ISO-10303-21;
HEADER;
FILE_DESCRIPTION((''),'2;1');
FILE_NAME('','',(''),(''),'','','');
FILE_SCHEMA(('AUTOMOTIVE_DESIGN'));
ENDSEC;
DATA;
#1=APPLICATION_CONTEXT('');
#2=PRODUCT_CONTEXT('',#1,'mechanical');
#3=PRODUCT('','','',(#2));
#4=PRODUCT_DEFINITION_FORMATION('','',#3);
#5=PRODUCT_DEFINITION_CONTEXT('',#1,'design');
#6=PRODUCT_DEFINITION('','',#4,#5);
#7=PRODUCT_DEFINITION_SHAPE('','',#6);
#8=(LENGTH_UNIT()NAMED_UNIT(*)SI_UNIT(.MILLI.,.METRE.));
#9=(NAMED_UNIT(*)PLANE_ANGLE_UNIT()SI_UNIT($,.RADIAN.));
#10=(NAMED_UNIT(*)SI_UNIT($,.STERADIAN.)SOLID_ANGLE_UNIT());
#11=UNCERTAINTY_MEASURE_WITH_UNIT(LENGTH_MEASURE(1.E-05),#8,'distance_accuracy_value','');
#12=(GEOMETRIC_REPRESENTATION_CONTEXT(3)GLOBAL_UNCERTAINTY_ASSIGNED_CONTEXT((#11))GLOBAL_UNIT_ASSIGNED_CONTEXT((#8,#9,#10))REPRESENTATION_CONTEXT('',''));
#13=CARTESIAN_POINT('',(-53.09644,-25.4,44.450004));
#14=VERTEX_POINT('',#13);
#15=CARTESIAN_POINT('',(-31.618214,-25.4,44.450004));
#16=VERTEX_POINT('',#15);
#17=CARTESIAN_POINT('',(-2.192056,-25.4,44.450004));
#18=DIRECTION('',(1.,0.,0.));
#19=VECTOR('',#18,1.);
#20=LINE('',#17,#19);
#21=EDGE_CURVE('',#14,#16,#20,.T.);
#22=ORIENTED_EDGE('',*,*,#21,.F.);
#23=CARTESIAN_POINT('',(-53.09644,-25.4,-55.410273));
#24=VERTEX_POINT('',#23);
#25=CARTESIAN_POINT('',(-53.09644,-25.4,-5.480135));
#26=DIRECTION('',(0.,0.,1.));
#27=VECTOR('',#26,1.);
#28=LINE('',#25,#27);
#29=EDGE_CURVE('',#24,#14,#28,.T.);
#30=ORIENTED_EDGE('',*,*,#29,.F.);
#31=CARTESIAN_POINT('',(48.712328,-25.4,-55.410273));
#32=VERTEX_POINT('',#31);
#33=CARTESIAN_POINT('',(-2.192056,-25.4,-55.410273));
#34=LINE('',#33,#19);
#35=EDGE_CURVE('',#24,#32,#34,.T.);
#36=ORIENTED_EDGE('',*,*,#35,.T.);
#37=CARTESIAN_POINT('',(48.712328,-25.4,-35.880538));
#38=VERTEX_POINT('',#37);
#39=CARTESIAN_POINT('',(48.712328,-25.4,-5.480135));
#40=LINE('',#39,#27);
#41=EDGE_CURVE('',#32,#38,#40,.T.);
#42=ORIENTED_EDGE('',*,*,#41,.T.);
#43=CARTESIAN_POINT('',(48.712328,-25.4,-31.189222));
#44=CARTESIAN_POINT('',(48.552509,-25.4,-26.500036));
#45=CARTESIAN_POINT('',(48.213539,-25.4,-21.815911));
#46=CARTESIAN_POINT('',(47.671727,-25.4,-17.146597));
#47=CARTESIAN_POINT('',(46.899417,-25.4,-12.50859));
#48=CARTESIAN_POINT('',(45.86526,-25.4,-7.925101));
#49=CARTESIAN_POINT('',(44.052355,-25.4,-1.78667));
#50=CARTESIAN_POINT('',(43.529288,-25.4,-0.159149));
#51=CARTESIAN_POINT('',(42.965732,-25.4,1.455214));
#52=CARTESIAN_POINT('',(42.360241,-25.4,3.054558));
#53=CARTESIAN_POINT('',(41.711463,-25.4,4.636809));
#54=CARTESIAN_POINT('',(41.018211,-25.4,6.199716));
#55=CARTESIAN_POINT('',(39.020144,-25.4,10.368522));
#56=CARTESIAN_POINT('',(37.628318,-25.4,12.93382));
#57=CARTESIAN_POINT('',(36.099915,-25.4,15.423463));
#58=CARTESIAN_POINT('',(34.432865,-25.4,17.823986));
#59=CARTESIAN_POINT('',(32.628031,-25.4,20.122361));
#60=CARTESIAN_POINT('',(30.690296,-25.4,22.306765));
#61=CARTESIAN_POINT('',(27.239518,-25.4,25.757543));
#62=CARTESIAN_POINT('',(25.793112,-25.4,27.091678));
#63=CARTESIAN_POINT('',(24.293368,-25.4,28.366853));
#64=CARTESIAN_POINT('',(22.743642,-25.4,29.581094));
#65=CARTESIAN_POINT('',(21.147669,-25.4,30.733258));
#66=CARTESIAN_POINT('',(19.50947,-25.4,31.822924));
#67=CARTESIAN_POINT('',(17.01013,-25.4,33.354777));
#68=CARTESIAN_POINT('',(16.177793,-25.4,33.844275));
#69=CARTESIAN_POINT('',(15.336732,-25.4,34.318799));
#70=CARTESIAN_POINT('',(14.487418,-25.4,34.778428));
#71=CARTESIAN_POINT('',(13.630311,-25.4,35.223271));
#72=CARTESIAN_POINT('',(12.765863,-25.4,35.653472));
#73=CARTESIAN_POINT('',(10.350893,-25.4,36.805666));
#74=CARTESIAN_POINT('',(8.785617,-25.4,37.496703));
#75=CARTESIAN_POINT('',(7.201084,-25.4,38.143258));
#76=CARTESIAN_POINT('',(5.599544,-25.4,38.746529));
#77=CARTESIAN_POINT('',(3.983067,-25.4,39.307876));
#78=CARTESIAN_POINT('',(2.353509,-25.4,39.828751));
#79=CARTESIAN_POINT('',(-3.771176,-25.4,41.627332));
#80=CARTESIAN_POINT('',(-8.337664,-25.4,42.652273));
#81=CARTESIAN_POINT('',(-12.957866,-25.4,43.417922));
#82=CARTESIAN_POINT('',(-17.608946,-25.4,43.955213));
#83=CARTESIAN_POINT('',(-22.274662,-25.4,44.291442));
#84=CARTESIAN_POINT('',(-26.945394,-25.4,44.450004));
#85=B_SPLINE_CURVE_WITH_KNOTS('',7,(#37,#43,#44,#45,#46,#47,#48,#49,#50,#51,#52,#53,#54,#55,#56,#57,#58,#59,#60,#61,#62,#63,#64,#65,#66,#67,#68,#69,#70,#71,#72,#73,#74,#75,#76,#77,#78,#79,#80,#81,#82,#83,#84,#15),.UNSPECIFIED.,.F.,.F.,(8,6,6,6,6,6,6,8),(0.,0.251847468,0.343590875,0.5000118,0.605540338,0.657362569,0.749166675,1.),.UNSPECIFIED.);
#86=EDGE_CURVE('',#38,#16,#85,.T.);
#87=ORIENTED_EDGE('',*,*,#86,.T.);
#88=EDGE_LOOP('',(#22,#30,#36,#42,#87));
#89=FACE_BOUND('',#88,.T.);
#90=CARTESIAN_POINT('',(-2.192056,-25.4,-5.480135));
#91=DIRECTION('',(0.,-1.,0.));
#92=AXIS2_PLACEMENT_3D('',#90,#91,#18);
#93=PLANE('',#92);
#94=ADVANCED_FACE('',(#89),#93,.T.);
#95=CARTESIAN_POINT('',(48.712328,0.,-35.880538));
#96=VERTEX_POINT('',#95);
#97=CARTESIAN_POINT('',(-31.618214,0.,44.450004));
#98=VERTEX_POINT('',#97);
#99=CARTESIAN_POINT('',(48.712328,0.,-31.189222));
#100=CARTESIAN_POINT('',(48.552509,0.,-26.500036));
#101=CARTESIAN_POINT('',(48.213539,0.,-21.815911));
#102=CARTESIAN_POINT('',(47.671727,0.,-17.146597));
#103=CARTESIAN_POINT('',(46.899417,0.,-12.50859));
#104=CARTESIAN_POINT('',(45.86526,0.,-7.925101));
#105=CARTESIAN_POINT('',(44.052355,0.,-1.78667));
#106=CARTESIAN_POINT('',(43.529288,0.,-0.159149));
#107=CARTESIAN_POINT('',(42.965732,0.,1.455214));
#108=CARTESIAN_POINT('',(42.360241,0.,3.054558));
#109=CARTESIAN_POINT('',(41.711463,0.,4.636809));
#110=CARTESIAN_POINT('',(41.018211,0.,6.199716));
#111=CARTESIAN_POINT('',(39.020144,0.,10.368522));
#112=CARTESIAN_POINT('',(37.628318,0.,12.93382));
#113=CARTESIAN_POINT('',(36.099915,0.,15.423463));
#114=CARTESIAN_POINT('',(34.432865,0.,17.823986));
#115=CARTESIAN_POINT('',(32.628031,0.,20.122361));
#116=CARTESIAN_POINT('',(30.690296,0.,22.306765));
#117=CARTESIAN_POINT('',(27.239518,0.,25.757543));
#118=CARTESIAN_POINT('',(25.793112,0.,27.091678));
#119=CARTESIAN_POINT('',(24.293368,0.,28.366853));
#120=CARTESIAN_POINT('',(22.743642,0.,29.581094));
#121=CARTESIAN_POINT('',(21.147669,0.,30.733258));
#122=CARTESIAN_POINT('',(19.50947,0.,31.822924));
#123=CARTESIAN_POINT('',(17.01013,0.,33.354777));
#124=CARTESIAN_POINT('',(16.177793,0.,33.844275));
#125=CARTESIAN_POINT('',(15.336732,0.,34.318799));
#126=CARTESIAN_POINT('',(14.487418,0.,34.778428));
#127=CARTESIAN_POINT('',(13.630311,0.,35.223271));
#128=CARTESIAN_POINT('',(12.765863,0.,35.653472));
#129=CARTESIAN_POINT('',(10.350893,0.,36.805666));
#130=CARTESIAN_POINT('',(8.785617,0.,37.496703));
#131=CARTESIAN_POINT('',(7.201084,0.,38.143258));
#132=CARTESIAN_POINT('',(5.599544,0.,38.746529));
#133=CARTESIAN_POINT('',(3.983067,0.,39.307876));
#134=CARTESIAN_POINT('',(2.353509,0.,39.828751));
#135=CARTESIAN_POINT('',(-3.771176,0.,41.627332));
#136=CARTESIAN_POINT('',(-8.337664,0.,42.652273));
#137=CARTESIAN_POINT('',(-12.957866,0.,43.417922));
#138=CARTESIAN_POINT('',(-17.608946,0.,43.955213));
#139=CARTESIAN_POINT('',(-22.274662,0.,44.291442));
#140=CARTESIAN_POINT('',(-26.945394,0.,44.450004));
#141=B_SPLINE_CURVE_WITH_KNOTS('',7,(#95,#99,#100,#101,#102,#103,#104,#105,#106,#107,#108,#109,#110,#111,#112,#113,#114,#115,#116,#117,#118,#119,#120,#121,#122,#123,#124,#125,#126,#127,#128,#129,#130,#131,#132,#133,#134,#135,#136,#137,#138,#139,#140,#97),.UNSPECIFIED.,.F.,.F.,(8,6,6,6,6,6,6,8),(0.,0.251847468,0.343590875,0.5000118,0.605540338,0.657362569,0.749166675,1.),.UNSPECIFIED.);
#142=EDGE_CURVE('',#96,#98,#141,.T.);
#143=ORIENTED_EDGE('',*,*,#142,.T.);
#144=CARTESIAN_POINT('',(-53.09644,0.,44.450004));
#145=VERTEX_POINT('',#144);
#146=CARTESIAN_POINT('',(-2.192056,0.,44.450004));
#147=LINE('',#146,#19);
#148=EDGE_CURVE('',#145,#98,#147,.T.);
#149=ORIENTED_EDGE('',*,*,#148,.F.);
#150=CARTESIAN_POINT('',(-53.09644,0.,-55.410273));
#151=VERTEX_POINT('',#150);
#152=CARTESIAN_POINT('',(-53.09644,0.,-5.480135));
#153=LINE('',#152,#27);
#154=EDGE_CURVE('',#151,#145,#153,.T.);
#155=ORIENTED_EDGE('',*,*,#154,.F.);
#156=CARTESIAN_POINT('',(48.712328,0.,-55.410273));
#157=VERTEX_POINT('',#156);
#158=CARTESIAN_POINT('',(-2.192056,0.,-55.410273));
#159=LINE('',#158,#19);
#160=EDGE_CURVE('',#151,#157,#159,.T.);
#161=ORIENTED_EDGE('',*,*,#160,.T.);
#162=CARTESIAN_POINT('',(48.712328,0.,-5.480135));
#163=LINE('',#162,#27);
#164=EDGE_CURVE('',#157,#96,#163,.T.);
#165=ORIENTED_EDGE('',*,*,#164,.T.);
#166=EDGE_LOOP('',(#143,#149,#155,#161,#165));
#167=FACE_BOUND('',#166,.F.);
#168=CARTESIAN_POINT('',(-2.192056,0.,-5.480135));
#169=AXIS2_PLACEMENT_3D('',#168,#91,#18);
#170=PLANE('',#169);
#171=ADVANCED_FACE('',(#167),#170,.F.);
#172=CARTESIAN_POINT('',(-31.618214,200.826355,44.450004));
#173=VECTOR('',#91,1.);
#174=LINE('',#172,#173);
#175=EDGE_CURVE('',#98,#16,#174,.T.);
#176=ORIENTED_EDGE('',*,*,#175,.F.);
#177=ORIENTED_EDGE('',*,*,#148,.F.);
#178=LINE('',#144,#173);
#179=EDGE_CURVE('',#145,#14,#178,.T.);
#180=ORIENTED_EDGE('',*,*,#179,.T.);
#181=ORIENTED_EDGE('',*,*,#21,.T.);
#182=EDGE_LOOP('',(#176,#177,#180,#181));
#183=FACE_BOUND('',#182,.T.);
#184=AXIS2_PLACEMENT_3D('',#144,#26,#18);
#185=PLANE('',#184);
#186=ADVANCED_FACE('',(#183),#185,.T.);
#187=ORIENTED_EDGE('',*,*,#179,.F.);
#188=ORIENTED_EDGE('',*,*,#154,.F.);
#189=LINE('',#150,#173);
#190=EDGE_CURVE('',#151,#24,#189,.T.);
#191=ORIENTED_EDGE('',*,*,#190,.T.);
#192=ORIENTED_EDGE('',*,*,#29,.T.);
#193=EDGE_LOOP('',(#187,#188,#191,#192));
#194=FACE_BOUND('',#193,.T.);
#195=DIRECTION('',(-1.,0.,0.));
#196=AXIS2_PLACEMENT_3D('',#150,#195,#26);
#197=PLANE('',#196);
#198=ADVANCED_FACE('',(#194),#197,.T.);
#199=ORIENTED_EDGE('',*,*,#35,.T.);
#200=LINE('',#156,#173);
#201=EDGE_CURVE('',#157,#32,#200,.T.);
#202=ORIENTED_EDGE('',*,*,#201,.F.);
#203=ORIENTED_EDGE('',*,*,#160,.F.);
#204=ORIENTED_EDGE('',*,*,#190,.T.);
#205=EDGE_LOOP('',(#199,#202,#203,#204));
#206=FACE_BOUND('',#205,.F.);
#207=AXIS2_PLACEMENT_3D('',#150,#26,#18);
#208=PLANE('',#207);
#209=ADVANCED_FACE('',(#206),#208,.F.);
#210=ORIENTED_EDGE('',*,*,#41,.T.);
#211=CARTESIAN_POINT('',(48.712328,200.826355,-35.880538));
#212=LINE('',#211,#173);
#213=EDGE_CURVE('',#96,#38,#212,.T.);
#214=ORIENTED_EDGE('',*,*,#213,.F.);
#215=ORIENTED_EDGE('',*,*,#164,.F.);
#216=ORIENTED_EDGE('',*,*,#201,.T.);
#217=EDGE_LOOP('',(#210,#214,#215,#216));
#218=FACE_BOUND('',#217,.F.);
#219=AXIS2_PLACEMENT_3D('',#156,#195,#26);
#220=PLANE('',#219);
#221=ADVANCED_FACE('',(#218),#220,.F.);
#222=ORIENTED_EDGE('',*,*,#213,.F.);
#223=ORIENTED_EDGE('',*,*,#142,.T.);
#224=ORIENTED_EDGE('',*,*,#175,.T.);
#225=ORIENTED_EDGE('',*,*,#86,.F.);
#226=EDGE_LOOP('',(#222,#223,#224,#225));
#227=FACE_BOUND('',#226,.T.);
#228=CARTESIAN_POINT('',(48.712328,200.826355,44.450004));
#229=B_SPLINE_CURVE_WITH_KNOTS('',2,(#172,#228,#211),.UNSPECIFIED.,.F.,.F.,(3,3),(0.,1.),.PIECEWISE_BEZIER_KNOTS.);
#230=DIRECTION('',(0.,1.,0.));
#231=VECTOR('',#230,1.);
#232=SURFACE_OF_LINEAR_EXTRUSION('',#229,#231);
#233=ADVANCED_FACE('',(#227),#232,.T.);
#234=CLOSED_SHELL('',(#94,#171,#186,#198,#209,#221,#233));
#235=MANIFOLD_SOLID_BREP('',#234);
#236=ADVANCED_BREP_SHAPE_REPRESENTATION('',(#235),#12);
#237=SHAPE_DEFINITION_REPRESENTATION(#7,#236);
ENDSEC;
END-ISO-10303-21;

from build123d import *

# Parameters (mm, degrees)
F0_W        = 101.8087677658
F0_H        = 99.8602770269
F1_DEPTH    = 25.4
F2_T1_DEPTH = 427.052710372


# Not quite as in the source:
# - a fillet or chamfer that OpenCascade refuses, or shapes differently, is made with other operations: its cross-section is extruded or revolved along the edge and cut away or added


with BuildPart() as f1:
    # F0 (on Front) → F1 (new body)
    with BuildSketch(Plane.XZ):
        with Locations((-2.1920558065, -5.4801348597)):
            Rectangle(F0_W, F0_H)
    extrude(amount=F1_DEPTH)

    # F2: fillet of radius 80.3305420744 on 1 edges, made by hand

    # F2_s2 → F2_t1 (cut)
    with BuildSketch(Plane.XZ.offset(-200.826355186)):
        with BuildLine():
            add(Edge.make_bspline(
                [(-31.618213998, 44.4500036538), (48.7123280764, 44.4500036538), (48.7123280764, -35.8805384206)],
                knots=[0, 0, 0, 1, 1, 1], degree=2, weights=[1, 1, 1]))
            Line((48.7123280764, -35.8805384206), (48.7123280764, 44.4500036538))
            Line((48.7123280764, 44.4500036538), (-31.618213998, 44.4500036538))
        make_face()
    extrude(amount=F2_T1_DEPTH, mode=Mode.SUBTRACT)


solid = f1.part
